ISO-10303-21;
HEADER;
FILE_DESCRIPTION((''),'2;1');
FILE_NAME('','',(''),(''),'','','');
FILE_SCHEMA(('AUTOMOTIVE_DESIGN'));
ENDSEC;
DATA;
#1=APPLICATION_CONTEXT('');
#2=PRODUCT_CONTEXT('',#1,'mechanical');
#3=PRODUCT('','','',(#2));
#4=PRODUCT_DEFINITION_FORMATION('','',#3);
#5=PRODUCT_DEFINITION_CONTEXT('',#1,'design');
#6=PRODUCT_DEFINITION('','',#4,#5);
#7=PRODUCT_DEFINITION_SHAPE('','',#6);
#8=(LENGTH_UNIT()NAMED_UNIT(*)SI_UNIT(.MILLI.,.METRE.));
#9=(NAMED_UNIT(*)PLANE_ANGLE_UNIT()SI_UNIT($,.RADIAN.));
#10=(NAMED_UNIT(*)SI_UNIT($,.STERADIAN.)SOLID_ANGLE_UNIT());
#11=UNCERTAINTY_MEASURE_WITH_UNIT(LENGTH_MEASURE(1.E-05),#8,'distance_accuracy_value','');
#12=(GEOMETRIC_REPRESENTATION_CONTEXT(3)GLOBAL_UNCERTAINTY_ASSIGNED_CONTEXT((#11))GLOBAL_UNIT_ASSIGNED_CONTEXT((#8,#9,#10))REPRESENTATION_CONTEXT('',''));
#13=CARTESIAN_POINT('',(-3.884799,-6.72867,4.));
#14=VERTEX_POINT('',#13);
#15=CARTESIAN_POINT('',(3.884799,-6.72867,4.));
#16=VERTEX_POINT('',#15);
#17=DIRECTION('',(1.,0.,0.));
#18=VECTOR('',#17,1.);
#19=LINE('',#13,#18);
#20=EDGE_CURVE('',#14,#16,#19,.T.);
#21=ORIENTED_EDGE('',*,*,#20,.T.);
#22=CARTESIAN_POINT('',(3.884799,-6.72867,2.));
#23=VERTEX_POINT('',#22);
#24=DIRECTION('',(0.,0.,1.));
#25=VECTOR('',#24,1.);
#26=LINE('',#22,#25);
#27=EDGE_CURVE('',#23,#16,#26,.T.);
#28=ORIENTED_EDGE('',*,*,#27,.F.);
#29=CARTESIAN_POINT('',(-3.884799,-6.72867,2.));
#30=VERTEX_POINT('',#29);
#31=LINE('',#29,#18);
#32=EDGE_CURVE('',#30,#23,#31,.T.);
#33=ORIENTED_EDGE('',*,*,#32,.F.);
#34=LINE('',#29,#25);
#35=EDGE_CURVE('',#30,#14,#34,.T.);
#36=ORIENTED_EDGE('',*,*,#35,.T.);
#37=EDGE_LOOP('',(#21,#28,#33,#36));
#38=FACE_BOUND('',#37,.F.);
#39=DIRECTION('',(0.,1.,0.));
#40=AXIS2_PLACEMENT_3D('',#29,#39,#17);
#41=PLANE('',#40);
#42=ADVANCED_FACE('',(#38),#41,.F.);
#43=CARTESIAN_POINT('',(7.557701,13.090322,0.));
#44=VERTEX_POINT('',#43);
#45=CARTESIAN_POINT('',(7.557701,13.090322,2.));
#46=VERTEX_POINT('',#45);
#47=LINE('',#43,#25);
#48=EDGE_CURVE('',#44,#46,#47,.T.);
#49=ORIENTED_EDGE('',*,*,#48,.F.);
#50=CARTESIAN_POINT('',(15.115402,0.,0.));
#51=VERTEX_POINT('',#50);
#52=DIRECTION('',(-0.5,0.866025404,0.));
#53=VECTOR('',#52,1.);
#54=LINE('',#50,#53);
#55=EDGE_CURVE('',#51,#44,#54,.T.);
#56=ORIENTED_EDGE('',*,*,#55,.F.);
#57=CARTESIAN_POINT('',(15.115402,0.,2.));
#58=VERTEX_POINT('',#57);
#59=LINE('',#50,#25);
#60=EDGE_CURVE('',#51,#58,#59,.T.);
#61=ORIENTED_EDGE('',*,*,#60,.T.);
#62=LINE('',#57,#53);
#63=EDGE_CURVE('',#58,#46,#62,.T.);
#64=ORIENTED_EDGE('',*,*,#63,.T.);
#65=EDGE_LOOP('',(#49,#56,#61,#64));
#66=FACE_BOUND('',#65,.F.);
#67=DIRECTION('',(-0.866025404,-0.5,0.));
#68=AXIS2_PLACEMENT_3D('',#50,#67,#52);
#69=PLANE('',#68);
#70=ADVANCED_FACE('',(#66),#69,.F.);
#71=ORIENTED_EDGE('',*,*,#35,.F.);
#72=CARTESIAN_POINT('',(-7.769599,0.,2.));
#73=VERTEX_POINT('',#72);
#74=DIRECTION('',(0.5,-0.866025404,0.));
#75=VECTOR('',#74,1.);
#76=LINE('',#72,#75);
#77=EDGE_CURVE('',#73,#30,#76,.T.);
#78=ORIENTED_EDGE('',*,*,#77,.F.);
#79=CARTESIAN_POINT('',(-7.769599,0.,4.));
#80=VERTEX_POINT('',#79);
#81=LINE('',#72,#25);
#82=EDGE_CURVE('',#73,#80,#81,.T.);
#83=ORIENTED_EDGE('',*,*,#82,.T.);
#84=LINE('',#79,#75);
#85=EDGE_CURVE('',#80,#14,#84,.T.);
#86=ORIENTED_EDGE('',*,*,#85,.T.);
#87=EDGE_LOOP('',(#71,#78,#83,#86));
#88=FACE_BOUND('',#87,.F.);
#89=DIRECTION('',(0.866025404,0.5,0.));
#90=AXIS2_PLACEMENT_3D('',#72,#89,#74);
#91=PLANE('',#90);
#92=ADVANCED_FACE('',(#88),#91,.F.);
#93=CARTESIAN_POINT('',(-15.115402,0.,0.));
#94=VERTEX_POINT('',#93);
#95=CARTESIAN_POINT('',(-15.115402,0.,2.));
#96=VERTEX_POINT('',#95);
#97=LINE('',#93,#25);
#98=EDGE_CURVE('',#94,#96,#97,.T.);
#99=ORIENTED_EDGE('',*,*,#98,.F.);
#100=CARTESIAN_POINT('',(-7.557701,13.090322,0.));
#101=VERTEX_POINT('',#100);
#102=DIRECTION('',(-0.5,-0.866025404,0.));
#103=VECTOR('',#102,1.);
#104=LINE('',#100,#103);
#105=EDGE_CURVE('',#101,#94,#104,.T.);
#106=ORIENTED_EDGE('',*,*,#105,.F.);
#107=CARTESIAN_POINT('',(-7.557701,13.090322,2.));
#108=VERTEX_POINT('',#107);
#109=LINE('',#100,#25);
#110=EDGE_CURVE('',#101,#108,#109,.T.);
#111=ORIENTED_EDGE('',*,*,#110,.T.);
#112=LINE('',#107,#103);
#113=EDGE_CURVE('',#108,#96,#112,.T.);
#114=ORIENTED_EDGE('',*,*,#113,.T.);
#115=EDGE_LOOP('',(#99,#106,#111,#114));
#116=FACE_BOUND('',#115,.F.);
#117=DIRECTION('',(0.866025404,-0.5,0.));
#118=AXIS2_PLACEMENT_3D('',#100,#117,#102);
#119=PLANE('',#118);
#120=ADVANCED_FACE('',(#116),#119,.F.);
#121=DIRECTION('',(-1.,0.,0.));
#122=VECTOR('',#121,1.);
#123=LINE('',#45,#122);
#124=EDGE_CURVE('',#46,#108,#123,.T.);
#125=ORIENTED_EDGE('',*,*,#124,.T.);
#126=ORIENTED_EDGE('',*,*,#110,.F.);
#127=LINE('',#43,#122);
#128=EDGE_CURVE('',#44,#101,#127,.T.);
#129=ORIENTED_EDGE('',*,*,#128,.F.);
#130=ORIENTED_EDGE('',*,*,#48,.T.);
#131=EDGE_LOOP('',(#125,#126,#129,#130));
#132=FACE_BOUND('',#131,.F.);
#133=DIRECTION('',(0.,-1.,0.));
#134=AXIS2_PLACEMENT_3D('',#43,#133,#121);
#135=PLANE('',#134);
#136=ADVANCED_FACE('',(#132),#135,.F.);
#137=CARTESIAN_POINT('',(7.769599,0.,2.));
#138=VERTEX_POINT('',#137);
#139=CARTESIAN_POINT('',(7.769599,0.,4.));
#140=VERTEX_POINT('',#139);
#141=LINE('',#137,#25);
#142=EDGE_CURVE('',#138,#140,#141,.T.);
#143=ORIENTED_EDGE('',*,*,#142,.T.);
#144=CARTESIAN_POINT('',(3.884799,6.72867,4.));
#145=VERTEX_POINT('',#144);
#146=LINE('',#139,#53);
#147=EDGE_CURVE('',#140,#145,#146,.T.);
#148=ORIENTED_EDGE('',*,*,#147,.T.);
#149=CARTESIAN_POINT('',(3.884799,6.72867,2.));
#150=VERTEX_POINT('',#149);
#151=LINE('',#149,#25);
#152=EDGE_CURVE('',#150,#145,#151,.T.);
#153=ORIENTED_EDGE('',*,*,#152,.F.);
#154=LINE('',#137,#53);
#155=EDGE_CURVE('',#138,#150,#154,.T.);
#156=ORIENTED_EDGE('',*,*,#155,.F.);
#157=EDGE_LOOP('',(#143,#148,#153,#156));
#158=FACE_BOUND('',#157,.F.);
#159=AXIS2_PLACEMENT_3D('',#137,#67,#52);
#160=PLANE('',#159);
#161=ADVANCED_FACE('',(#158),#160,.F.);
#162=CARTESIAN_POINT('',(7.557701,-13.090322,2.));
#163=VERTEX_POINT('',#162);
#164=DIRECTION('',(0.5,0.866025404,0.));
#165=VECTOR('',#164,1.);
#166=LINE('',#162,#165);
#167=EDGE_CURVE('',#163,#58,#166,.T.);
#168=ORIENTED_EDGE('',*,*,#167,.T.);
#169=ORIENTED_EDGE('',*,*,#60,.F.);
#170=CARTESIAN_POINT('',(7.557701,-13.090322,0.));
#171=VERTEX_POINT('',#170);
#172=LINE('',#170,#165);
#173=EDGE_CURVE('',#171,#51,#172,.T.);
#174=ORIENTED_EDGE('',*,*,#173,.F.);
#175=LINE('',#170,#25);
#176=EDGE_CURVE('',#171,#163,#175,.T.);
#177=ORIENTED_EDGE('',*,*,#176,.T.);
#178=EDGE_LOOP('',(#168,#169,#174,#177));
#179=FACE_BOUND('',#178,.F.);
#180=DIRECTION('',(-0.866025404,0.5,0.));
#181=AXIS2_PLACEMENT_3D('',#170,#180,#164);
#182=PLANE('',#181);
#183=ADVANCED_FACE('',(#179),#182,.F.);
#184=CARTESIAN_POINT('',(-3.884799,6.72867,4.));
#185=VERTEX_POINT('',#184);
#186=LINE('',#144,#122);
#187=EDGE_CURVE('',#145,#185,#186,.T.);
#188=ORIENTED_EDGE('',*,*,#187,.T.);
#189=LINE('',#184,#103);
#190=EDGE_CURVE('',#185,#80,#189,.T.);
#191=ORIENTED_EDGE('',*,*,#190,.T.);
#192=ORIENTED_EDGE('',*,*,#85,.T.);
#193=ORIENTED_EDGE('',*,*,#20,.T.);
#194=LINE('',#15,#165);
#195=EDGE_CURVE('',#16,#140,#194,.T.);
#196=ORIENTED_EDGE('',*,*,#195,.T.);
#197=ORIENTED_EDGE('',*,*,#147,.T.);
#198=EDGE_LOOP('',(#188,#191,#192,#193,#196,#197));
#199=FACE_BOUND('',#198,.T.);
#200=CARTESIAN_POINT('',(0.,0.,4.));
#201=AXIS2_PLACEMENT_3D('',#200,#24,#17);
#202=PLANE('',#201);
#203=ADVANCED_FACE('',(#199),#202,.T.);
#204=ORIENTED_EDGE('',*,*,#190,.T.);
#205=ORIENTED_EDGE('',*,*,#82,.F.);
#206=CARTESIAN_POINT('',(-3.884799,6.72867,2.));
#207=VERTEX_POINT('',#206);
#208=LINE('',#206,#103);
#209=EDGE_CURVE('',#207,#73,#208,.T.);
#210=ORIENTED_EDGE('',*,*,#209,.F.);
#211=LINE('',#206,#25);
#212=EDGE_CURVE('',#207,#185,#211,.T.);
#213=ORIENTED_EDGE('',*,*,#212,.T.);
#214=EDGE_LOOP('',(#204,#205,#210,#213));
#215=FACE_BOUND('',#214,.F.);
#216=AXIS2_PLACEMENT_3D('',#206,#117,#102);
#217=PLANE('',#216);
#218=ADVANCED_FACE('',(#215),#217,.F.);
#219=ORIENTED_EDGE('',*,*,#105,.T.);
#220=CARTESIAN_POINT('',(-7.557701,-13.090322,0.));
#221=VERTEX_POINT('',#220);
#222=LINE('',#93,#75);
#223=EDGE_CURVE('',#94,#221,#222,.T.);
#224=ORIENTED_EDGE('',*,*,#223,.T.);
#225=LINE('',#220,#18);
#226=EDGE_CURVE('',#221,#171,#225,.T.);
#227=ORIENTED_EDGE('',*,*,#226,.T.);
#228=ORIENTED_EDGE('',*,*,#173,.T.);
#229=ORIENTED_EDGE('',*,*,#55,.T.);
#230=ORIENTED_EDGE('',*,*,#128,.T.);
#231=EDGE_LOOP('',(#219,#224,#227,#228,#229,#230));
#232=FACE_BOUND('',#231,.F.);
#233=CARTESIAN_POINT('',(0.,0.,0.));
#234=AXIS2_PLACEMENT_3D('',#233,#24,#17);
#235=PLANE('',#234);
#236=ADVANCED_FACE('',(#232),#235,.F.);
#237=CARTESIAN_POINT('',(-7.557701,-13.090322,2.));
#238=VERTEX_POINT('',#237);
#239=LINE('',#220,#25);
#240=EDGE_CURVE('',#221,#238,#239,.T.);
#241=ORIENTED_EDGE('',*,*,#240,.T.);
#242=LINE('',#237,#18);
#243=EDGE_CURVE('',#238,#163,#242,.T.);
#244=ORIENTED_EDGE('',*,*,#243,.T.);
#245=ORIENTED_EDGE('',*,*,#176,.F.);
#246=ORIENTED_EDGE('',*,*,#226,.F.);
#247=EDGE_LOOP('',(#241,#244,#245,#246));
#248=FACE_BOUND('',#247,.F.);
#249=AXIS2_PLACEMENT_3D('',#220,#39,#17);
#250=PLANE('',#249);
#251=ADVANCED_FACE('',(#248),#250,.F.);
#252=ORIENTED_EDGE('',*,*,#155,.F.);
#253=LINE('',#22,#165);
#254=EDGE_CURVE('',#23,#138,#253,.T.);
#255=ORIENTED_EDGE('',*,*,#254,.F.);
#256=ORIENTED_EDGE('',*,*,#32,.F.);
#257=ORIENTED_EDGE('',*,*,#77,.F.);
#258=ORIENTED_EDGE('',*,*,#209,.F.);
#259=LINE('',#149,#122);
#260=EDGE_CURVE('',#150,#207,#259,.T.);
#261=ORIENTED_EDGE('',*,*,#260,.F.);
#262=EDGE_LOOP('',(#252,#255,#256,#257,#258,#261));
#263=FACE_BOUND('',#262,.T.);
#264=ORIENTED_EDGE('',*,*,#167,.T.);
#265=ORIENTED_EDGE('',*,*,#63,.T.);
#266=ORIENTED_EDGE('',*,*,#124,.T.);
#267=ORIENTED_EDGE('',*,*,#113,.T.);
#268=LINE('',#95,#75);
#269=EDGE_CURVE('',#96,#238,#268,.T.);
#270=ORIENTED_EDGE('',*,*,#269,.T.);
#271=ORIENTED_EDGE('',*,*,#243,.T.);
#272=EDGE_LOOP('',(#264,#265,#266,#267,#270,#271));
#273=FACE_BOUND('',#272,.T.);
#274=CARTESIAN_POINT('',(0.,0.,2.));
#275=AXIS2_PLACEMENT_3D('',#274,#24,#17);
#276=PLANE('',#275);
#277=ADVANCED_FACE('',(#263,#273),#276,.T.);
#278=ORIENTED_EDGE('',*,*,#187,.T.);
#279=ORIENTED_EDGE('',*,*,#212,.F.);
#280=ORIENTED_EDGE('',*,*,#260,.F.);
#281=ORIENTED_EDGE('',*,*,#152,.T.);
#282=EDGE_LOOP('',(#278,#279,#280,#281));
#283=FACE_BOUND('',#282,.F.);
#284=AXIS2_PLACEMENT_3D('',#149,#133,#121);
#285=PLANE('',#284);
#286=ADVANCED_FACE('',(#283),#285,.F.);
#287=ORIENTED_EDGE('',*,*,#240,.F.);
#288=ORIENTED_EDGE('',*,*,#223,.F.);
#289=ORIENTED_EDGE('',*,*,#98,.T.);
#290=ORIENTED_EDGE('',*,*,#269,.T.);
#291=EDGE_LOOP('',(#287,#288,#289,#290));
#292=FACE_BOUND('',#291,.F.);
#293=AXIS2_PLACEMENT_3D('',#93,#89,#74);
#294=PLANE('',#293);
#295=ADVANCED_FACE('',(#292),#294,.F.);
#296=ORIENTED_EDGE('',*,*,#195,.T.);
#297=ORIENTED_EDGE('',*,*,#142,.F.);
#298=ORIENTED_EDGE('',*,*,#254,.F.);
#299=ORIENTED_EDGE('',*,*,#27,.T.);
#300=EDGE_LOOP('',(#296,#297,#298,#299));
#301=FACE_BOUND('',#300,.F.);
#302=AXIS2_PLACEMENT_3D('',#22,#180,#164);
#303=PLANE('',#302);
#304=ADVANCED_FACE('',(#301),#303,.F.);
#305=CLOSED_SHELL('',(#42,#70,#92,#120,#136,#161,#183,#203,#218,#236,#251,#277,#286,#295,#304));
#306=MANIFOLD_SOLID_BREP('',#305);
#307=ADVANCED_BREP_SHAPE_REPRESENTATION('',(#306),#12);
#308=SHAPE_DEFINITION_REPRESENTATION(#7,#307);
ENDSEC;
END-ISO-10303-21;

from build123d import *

# Parameters (mm, degrees)
F1_DEPTH = 2
F3_DEPTH = 2


# Not quite as in the source:
# - the program builds the solid bodies; features that only make, move or delete a surface that nothing else refers to are left out


with BuildPart() as f1:
    # F0 (on Top) → F1 (new body)
    with BuildSketch(Plane.XY):
        Polygon((7.5577008116, 13.0903217942), (-7.5577008116, 13.0903217942), (-15.1154016233, 0), (-7.5577008116, -13.0903217942), (7.5577008116, -13.0903217942), (15.1154016233, 0), align=None)
    extrude(amount=F1_DEPTH)

    # F2 (on face) → F3 (join)
    with BuildSketch(Plane.XY.offset(2)):
        Polygon((3.8847994902, 6.7286700942), (-3.8847994902, 6.7286700942), (-7.7695989803, 0), (-3.8847994902, -6.7286700942), (3.8847994902, -6.7286700942), (7.7695989803, 0), align=None)
    extrude(amount=F3_DEPTH)


solid = f1.part
